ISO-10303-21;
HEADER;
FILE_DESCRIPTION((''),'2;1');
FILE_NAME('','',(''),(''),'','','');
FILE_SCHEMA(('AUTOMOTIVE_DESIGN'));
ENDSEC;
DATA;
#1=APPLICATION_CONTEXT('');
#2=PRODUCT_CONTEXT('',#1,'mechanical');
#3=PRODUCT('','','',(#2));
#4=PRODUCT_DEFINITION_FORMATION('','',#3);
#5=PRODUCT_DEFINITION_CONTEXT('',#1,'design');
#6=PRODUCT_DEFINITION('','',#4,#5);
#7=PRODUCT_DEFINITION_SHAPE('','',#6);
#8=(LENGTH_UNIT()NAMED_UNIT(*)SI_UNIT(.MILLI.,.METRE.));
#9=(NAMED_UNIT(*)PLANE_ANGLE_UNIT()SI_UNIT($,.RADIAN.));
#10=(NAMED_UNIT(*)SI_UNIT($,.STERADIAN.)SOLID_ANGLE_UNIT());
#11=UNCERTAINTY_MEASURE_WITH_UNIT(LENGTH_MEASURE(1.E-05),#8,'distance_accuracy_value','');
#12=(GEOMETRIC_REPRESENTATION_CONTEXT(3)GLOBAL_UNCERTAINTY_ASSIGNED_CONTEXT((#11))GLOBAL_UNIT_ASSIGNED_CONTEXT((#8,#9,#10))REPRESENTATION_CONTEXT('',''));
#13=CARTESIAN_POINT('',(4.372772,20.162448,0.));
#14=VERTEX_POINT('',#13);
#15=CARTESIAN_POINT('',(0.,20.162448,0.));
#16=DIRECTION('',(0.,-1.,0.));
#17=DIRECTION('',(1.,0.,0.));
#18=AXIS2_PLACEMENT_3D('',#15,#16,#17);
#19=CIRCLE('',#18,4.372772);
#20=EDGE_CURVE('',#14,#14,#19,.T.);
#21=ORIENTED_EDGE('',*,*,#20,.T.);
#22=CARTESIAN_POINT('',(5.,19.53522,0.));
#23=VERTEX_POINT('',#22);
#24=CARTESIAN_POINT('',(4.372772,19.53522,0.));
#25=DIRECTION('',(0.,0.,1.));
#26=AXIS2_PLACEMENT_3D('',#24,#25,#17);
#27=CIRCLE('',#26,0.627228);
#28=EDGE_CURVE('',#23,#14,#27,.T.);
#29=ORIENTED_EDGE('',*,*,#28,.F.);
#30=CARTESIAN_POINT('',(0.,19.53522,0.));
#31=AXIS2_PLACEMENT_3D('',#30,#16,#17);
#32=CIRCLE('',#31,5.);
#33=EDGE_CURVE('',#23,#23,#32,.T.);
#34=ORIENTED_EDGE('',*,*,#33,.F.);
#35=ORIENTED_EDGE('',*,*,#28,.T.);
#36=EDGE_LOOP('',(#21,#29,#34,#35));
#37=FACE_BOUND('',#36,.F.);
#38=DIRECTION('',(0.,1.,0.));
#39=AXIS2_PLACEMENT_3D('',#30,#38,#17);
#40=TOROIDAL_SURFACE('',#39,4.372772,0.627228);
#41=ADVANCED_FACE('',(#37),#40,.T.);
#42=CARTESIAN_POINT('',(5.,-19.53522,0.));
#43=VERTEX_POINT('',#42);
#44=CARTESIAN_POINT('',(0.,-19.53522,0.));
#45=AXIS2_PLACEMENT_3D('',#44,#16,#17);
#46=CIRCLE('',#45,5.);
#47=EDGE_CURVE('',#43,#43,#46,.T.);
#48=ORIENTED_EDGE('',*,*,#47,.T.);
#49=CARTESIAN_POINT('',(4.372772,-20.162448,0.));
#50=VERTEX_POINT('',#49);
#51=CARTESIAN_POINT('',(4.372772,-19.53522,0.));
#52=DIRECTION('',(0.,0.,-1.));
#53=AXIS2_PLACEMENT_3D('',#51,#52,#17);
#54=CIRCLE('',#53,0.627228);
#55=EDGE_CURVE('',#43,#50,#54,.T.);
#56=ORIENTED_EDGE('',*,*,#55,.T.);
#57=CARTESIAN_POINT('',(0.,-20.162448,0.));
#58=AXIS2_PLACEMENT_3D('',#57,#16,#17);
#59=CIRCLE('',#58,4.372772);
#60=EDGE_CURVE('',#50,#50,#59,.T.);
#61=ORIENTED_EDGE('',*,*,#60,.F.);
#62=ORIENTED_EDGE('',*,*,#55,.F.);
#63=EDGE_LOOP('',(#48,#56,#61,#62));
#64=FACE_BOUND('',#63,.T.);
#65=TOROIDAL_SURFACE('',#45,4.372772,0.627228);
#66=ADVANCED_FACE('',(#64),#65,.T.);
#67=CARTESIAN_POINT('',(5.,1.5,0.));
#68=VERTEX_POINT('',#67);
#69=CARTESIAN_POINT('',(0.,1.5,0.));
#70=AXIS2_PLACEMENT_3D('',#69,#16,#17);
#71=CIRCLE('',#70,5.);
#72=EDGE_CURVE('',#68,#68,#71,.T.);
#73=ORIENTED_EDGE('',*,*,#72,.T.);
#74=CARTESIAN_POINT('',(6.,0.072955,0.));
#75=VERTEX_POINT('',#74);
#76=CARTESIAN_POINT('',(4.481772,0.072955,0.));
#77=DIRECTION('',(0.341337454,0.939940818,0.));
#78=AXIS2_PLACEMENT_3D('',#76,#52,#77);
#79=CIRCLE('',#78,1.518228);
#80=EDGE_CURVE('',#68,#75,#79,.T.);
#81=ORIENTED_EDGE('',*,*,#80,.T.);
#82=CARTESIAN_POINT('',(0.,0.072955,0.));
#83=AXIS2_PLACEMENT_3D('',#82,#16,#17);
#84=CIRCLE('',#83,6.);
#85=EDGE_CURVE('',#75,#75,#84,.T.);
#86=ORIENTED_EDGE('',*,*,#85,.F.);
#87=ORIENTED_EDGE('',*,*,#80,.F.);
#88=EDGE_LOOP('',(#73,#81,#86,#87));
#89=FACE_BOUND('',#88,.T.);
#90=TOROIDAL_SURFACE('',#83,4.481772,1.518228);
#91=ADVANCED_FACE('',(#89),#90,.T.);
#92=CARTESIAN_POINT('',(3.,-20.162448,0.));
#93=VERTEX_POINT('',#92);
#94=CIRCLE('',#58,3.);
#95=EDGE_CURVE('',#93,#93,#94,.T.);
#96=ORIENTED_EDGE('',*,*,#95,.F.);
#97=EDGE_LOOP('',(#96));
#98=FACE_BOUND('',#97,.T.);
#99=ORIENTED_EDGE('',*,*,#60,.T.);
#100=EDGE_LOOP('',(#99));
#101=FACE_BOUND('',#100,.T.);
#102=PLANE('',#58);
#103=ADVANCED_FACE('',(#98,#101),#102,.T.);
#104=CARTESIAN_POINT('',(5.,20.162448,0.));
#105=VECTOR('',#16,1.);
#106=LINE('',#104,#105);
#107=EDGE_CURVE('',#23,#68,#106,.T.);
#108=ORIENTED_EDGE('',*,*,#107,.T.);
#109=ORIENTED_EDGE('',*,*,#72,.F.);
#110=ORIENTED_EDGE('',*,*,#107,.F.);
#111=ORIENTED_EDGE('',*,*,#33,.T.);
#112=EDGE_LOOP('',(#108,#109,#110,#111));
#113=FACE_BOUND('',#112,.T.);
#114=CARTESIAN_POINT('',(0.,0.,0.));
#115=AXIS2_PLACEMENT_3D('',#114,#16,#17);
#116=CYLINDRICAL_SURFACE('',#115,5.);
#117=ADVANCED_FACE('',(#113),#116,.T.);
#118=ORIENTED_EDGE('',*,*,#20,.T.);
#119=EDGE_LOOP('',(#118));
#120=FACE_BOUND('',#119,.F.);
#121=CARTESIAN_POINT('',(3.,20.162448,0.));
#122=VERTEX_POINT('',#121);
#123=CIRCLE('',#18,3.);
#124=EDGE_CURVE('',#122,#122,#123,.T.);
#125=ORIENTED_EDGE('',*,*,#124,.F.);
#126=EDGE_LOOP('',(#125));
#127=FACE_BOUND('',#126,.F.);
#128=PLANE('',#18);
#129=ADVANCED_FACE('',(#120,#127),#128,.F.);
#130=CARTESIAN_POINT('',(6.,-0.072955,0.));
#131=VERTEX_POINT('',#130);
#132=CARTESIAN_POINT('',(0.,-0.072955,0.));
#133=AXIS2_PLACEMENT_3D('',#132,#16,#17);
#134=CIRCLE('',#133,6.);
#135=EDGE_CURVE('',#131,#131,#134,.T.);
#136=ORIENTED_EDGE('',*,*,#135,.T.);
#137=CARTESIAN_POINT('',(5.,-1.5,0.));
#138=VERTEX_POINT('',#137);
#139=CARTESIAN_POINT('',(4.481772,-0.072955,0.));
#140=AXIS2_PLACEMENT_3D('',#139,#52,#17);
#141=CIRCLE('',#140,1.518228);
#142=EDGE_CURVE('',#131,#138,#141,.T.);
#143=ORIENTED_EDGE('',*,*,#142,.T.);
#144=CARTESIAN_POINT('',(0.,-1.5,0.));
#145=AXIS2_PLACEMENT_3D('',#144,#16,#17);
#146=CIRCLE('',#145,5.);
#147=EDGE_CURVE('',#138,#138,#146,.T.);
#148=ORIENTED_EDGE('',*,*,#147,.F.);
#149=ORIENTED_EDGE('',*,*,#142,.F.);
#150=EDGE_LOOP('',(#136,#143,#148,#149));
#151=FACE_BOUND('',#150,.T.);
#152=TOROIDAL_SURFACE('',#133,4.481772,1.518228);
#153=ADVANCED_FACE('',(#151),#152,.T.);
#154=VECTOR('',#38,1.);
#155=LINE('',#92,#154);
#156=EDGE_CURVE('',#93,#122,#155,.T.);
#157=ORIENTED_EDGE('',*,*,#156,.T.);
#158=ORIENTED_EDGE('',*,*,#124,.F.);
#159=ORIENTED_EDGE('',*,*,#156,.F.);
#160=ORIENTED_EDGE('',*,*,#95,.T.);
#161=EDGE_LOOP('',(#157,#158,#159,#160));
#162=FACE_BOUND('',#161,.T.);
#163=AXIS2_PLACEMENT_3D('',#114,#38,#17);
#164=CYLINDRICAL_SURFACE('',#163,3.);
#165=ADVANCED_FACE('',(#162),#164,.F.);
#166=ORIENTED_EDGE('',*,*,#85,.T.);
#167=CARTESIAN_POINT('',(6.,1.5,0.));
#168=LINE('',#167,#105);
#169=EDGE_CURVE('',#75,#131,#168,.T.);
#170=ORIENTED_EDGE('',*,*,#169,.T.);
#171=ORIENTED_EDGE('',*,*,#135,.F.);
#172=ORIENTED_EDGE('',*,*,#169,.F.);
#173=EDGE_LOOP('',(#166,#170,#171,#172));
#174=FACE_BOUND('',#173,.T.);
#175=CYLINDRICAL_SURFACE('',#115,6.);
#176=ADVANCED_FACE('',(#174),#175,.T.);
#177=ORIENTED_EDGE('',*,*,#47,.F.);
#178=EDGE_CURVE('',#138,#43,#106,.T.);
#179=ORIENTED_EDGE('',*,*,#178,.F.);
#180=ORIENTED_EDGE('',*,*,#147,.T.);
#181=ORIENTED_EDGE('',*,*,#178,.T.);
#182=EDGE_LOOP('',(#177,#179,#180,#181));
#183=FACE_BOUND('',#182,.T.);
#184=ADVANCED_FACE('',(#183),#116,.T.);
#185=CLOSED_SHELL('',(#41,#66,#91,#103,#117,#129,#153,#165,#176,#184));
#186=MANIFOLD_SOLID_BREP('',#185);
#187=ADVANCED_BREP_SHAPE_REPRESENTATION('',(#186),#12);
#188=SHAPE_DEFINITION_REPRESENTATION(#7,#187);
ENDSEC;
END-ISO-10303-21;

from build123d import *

# Parameters (mm, degrees)
F0_R     = 5
F0_R_2   = 3
F1_DEPTH = 20.162448287
F2_R     = 0.6272281394
F0_R_3   = 6
F3_DEPTH = 1.5


# Not quite as in the source:
# - a fillet or chamfer that OpenCascade refuses, or shapes differently, is made with other operations: its cross-section is extruded or revolved along the edge and cut away or added


with BuildPart() as f1:
    # F0 (on Front) → F1 (new body, symmetric)
    with BuildSketch(Plane.XZ):
        Circle(F0_R)
        Circle(F0_R_2, mode=Mode.SUBTRACT)
    extrude(amount=F1_DEPTH, both=True)

    # F2
    f2_edges = [f1.edges().sort_by_distance(p)[0] for p in [
        (-5, -20.162448, 0),
        (-5, 20.162448, 0),
    ]]
    fillet(f2_edges, radius=F2_R)

    # F0 (on Front) → F3 (join, symmetric)
    with BuildSketch(Plane.XZ):
        Circle(F0_R_3)
        Circle(F0_R, mode=Mode.SUBTRACT)
    extrude(amount=F3_DEPTH, both=True)

    # F4: fillet of radius 1.5182281224 on 2 edges, made by hand

    # F4_s1 → F4_t2 (revolve, cut)
    with BuildSketch(Plane.XY):
        with BuildLine():
            ThreePointArc((5, 1.5), (5.7251151811, 0.9442269358), (6, 0.072955416))
            Line((6, 0.072955416), (6, 1.5))
            Line((6, 1.5), (5, 1.5))
        make_face()
    revolve(axis=Axis((0, 1.5, 0), (0, -1, 0)), mode=Mode.SUBTRACT)

    # F4_s3 → F4_t4 (revolve, cut)
    with BuildSketch(Plane.XY):
        with BuildLine():
            ThreePointArc((6, -0.072955416), (5.7251151811, -0.9442269358), (5, -1.5))
            Line((5, -1.5), (6, -1.5))
            Line((6, -1.5), (6, -0.072955416))
        make_face()
    revolve(axis=Axis((0, -1.5, 0), (0, -1, 0)), mode=Mode.SUBTRACT)


solid = f1.part
